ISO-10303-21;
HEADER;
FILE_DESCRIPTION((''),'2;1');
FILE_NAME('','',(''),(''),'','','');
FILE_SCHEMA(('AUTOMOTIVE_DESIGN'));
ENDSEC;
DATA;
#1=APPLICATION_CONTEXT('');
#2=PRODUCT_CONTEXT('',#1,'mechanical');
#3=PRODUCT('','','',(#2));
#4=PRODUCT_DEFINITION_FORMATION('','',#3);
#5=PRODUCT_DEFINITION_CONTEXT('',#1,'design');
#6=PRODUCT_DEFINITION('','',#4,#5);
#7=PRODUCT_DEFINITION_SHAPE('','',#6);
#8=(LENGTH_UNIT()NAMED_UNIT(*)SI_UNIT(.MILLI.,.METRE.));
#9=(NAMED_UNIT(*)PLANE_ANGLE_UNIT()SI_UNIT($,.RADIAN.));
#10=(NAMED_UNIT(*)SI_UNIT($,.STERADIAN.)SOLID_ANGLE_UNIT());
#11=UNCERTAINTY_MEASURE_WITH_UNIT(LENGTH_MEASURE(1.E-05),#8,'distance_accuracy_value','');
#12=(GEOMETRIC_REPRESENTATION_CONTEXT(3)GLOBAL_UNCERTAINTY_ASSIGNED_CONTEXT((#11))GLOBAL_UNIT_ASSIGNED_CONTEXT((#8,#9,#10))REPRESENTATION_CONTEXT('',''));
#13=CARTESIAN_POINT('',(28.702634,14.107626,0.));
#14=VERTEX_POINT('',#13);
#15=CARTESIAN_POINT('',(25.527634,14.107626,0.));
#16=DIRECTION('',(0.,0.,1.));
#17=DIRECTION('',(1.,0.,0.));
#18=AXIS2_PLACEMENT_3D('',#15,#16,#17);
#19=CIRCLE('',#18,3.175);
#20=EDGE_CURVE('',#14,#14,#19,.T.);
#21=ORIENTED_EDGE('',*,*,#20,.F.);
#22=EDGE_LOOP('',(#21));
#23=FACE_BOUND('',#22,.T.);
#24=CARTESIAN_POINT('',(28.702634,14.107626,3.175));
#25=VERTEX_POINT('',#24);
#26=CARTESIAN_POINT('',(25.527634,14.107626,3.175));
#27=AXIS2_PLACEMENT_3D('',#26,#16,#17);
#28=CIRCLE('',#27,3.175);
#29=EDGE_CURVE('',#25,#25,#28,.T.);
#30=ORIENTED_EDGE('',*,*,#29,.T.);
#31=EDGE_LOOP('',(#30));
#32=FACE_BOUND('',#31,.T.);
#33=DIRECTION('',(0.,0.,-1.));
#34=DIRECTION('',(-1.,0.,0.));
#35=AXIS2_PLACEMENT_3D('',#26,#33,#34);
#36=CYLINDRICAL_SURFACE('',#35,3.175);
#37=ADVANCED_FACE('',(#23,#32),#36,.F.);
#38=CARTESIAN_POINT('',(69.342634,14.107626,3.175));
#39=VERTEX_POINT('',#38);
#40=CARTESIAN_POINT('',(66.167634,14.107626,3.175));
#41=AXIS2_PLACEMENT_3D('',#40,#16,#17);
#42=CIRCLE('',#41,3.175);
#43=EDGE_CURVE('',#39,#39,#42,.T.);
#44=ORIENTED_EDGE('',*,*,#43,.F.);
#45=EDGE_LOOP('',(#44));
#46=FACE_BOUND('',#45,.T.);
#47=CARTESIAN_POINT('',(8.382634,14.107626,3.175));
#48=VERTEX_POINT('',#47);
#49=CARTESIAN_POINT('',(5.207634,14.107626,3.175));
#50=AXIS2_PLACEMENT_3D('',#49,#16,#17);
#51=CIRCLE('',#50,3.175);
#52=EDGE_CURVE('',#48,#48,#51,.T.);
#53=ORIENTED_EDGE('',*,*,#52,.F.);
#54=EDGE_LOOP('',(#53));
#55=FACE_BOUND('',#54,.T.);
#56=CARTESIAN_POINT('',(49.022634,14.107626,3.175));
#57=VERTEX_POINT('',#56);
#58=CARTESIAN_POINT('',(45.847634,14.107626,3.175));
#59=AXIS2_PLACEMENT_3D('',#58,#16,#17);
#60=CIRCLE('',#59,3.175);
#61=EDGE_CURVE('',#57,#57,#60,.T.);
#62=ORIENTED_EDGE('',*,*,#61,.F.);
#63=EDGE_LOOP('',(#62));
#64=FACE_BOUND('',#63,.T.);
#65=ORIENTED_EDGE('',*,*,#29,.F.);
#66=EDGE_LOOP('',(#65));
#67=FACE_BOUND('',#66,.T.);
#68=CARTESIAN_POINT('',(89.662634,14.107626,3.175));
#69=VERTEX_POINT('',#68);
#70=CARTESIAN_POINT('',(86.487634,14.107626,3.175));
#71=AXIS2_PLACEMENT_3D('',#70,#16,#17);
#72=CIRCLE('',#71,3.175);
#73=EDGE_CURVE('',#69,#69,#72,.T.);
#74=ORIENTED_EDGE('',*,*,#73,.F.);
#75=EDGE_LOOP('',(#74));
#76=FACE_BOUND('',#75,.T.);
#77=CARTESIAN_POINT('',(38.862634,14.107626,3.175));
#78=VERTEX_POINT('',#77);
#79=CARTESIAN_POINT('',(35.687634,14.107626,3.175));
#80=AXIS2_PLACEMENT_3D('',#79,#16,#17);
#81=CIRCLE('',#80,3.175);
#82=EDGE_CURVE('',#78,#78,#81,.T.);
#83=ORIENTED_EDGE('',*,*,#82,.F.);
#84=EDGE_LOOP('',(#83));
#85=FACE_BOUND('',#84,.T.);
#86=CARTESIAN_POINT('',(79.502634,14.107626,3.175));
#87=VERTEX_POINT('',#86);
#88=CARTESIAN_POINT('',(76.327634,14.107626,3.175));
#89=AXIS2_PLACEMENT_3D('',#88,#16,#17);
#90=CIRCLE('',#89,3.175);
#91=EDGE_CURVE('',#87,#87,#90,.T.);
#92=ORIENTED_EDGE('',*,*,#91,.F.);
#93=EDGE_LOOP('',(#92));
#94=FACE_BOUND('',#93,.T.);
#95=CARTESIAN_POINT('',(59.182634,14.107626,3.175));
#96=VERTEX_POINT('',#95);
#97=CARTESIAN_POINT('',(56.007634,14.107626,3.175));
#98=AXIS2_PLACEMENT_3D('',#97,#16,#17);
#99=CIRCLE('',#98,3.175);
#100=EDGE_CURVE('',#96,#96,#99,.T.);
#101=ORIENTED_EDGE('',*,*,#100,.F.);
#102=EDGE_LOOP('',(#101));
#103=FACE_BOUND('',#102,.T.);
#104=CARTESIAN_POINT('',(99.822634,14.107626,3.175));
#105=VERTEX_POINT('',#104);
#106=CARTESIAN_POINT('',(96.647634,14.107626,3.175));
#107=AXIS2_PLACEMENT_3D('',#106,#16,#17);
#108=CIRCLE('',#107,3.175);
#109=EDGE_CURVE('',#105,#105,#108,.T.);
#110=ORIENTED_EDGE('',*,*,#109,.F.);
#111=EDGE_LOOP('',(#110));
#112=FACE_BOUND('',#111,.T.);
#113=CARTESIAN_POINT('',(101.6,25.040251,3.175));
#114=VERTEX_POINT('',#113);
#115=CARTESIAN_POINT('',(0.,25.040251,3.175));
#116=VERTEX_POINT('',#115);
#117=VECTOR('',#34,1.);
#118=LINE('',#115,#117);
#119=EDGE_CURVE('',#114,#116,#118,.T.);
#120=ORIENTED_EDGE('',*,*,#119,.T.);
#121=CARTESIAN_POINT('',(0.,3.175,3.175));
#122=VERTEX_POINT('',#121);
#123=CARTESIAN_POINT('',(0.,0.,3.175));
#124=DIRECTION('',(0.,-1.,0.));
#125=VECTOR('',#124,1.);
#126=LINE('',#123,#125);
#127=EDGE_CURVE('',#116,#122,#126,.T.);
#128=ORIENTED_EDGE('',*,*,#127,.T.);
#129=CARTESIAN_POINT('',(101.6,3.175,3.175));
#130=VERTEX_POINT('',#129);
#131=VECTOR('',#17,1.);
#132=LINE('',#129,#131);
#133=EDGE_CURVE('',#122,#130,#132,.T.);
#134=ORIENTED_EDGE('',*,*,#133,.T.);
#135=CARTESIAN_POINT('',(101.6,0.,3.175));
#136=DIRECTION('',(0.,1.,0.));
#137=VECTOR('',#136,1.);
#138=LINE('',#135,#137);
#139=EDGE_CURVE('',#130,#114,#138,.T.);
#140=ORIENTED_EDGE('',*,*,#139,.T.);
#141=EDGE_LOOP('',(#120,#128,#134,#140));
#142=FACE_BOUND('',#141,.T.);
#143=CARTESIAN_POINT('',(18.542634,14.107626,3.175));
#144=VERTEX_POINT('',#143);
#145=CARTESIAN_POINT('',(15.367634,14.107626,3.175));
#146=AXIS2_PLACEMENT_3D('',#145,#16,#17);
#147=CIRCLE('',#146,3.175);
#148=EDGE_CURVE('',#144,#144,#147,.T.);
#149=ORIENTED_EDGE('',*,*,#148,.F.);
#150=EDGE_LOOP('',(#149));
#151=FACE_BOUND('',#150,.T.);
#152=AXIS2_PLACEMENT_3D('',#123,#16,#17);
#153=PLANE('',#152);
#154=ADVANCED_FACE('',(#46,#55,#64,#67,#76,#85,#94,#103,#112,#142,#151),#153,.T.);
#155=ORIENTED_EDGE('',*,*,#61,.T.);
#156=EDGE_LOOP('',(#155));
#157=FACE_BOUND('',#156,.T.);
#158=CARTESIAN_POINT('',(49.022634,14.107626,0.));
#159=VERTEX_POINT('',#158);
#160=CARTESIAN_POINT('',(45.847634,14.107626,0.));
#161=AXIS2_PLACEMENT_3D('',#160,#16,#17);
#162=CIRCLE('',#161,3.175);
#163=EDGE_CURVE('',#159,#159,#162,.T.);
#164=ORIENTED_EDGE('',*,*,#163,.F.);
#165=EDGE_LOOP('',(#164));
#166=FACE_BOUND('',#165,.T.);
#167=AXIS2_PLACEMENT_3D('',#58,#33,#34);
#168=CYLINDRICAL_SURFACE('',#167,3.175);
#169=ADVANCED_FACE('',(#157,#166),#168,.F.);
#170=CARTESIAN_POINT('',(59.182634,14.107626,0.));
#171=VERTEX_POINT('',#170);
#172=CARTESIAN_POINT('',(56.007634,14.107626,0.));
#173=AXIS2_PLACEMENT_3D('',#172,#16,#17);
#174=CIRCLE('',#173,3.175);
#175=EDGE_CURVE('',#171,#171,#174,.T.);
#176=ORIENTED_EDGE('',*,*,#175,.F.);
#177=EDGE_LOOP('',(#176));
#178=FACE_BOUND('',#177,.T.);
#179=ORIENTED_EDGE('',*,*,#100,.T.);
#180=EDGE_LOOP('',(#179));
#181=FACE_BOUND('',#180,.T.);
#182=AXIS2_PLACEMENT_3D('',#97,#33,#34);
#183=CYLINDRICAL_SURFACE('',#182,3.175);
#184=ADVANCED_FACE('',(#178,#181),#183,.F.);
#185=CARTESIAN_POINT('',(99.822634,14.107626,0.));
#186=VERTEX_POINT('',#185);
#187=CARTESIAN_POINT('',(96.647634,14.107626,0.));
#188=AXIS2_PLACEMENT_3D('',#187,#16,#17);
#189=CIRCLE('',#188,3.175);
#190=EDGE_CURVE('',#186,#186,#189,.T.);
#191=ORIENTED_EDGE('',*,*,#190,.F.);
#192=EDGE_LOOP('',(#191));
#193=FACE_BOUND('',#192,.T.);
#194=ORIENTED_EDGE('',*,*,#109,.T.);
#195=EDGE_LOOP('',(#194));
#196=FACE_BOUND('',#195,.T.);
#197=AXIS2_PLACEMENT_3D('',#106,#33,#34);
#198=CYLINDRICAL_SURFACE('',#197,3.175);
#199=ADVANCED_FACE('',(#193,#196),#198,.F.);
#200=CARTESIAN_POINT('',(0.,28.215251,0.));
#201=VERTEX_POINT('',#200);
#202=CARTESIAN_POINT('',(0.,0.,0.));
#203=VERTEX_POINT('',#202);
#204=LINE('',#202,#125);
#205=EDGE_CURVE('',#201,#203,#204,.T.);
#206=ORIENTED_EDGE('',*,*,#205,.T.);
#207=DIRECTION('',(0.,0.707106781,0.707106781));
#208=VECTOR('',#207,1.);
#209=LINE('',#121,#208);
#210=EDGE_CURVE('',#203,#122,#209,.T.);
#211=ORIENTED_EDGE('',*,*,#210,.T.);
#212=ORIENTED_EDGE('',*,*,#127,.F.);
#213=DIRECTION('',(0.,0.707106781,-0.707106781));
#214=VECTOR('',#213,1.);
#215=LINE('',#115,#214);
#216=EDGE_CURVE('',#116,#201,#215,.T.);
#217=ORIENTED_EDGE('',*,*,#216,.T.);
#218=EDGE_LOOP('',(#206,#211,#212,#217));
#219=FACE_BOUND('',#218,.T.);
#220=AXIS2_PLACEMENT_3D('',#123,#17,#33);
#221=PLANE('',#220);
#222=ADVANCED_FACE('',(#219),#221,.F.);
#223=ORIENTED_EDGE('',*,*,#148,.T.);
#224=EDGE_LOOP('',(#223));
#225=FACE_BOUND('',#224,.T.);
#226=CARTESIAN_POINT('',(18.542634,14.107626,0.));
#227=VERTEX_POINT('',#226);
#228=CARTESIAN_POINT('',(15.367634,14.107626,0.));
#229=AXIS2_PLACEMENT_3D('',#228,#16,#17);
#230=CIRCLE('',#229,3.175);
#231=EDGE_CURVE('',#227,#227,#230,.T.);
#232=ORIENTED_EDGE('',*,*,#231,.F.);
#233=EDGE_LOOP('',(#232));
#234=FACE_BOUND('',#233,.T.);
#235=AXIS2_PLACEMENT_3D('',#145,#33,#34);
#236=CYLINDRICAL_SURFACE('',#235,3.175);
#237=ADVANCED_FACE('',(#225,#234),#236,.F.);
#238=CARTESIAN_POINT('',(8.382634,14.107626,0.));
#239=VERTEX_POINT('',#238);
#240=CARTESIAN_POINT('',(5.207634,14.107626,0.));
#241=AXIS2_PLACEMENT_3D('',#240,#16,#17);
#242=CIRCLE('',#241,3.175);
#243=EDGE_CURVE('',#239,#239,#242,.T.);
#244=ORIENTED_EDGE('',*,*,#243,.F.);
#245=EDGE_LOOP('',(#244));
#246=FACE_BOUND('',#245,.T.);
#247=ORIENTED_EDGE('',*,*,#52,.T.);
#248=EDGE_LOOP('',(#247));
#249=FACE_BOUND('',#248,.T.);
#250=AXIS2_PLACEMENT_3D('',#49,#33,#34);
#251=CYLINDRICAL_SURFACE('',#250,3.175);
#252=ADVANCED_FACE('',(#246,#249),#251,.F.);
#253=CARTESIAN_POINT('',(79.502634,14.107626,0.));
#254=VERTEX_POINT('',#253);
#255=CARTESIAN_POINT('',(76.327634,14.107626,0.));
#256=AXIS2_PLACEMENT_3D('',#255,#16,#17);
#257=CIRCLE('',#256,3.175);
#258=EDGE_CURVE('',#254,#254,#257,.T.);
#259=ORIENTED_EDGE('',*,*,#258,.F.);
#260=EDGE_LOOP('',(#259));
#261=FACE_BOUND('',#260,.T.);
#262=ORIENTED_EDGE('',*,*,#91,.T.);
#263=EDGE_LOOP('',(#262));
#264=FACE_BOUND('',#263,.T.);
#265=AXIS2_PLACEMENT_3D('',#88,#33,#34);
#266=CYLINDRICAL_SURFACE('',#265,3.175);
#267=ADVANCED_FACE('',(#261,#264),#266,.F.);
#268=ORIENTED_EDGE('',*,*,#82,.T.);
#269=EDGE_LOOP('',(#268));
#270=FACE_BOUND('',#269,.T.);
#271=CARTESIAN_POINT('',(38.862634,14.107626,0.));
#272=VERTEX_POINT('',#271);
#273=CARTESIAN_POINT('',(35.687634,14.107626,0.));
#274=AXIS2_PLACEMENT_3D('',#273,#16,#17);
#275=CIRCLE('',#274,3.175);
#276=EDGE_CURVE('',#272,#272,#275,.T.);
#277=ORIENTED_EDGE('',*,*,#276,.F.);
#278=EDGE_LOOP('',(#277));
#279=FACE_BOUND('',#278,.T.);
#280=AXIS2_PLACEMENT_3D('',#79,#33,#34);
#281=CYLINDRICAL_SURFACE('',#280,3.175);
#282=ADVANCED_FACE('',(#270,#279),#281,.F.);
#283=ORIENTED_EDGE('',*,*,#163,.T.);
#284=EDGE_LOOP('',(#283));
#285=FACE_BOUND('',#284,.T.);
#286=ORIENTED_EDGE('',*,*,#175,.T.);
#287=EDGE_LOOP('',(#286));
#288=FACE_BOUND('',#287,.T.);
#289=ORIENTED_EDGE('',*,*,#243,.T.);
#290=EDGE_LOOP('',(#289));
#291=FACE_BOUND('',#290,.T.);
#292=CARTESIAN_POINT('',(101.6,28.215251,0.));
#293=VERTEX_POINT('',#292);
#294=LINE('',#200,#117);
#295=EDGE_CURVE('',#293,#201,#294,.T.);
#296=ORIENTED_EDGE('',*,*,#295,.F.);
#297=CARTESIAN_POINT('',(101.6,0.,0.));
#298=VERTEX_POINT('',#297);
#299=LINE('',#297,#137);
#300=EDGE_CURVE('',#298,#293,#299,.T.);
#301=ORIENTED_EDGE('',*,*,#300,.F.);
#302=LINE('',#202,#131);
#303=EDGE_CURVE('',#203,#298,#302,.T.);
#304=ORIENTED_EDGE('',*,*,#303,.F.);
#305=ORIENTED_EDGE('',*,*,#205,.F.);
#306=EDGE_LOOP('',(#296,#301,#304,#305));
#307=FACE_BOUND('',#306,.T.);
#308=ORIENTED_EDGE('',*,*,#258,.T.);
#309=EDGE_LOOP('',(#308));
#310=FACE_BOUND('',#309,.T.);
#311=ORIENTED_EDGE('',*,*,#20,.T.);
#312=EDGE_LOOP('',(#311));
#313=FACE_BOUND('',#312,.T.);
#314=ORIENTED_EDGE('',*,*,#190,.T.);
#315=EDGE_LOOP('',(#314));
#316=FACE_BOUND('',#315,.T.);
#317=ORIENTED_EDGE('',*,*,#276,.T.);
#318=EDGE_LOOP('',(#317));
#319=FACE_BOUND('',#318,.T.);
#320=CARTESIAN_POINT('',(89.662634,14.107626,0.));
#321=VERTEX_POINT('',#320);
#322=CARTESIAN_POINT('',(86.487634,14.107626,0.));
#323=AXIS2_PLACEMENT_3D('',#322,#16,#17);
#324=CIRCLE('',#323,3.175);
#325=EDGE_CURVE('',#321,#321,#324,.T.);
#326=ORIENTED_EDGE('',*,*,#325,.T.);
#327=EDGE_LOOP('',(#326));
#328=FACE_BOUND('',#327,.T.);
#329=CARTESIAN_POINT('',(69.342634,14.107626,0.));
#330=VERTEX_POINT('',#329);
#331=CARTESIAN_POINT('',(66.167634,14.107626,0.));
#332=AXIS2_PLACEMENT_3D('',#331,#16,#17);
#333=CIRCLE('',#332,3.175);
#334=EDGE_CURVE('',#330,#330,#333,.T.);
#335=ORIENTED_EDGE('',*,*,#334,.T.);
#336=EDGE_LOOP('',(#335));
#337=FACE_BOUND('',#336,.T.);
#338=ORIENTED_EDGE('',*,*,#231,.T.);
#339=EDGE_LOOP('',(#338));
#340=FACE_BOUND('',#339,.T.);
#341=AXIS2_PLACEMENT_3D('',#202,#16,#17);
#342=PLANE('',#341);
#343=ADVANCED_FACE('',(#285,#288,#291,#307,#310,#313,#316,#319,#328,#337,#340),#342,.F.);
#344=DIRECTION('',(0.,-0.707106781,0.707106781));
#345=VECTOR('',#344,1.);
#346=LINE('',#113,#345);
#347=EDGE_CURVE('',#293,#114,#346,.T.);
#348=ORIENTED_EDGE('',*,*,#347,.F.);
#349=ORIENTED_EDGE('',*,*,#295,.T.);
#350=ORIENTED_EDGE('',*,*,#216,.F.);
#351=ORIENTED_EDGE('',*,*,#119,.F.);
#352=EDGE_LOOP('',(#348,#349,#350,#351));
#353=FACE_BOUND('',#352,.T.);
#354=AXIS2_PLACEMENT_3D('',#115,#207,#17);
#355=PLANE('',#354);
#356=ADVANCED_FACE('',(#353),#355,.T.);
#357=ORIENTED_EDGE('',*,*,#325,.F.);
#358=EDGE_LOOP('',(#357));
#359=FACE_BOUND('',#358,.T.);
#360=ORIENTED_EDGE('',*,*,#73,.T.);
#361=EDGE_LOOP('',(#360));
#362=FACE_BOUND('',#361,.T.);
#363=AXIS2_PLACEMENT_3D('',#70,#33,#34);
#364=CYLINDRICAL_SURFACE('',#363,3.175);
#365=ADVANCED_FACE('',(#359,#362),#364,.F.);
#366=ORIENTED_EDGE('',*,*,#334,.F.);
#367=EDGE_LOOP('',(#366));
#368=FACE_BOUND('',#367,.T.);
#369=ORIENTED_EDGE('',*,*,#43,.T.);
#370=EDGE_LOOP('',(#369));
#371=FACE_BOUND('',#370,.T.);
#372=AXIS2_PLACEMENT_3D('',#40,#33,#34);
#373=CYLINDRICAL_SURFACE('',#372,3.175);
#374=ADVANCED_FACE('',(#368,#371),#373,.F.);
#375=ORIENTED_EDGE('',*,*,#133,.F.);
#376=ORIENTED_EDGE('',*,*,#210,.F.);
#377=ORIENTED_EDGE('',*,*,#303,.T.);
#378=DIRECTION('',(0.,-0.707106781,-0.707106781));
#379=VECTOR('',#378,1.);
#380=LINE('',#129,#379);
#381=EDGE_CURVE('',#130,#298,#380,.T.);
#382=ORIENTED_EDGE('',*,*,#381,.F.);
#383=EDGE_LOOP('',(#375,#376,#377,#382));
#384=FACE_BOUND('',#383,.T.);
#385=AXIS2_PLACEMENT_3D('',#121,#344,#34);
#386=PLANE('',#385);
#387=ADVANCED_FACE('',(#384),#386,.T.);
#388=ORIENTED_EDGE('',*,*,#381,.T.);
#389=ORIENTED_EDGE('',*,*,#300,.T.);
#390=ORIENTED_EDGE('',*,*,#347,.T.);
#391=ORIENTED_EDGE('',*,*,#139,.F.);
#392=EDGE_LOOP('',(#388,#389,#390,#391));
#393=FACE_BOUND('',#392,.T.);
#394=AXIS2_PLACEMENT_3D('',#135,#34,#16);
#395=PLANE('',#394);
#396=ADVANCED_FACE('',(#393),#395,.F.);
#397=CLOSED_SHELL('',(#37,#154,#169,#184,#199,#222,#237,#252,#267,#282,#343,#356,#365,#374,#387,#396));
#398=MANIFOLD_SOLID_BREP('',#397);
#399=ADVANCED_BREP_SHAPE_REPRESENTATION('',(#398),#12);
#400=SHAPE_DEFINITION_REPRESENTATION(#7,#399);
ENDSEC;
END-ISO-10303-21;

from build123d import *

# Parameters (mm, degrees)
SKETCH1_W           = 101.6
SKETCH1_H           = 28.215251418
SKETCH1_R           = 3.175
BOSS_EXTRUDE1_DEPTH = 3.175
CHAMFER1_SIZE       = 3.175


with BuildPart() as part:
    # Sketch1 → Boss-Extrude1 (new body)
    with BuildSketch(Plane.XY):
        with Locations((50.8, 14.107625709)):
            Rectangle(SKETCH1_W, SKETCH1_H)
        with Locations((5.2076336, 14.107625709)):
            Circle(SKETCH1_R, mode=Mode.SUBTRACT)
        with Locations((15.3676336, 14.107625709)):
            Circle(SKETCH1_R, mode=Mode.SUBTRACT)
        with Locations((25.5276336, 14.107625709)):
            Circle(SKETCH1_R, mode=Mode.SUBTRACT)
        with Locations((35.6876336, 14.107625709)):
            Circle(SKETCH1_R, mode=Mode.SUBTRACT)
        with Locations((45.8476336, 14.107625709)):
            Circle(SKETCH1_R, mode=Mode.SUBTRACT)
        with Locations((56.0076336, 14.107625709)):
            Circle(SKETCH1_R, mode=Mode.SUBTRACT)
        with Locations((66.1676336, 14.107625709)):
            Circle(SKETCH1_R, mode=Mode.SUBTRACT)
        with Locations((76.3276336, 14.107625709)):
            Circle(SKETCH1_R, mode=Mode.SUBTRACT)
        with Locations((86.4876336, 14.107625709)):
            Circle(SKETCH1_R, mode=Mode.SUBTRACT)
        with Locations((96.6476336, 14.107625709)):
            Circle(SKETCH1_R, mode=Mode.SUBTRACT)
    extrude(amount=BOSS_EXTRUDE1_DEPTH)

    # Chamfer1
    chamfer1_edges = [part.edges().sort_by_distance(p)[0] for p in [
        (50.8, 0, 3.175),
        (50.8, 28.215251418, 3.175),
    ]]
    chamfer(chamfer1_edges, length=CHAMFER1_SIZE - 0.0001)  # a hair under: the kernel refuses the full size


solid = part.part
